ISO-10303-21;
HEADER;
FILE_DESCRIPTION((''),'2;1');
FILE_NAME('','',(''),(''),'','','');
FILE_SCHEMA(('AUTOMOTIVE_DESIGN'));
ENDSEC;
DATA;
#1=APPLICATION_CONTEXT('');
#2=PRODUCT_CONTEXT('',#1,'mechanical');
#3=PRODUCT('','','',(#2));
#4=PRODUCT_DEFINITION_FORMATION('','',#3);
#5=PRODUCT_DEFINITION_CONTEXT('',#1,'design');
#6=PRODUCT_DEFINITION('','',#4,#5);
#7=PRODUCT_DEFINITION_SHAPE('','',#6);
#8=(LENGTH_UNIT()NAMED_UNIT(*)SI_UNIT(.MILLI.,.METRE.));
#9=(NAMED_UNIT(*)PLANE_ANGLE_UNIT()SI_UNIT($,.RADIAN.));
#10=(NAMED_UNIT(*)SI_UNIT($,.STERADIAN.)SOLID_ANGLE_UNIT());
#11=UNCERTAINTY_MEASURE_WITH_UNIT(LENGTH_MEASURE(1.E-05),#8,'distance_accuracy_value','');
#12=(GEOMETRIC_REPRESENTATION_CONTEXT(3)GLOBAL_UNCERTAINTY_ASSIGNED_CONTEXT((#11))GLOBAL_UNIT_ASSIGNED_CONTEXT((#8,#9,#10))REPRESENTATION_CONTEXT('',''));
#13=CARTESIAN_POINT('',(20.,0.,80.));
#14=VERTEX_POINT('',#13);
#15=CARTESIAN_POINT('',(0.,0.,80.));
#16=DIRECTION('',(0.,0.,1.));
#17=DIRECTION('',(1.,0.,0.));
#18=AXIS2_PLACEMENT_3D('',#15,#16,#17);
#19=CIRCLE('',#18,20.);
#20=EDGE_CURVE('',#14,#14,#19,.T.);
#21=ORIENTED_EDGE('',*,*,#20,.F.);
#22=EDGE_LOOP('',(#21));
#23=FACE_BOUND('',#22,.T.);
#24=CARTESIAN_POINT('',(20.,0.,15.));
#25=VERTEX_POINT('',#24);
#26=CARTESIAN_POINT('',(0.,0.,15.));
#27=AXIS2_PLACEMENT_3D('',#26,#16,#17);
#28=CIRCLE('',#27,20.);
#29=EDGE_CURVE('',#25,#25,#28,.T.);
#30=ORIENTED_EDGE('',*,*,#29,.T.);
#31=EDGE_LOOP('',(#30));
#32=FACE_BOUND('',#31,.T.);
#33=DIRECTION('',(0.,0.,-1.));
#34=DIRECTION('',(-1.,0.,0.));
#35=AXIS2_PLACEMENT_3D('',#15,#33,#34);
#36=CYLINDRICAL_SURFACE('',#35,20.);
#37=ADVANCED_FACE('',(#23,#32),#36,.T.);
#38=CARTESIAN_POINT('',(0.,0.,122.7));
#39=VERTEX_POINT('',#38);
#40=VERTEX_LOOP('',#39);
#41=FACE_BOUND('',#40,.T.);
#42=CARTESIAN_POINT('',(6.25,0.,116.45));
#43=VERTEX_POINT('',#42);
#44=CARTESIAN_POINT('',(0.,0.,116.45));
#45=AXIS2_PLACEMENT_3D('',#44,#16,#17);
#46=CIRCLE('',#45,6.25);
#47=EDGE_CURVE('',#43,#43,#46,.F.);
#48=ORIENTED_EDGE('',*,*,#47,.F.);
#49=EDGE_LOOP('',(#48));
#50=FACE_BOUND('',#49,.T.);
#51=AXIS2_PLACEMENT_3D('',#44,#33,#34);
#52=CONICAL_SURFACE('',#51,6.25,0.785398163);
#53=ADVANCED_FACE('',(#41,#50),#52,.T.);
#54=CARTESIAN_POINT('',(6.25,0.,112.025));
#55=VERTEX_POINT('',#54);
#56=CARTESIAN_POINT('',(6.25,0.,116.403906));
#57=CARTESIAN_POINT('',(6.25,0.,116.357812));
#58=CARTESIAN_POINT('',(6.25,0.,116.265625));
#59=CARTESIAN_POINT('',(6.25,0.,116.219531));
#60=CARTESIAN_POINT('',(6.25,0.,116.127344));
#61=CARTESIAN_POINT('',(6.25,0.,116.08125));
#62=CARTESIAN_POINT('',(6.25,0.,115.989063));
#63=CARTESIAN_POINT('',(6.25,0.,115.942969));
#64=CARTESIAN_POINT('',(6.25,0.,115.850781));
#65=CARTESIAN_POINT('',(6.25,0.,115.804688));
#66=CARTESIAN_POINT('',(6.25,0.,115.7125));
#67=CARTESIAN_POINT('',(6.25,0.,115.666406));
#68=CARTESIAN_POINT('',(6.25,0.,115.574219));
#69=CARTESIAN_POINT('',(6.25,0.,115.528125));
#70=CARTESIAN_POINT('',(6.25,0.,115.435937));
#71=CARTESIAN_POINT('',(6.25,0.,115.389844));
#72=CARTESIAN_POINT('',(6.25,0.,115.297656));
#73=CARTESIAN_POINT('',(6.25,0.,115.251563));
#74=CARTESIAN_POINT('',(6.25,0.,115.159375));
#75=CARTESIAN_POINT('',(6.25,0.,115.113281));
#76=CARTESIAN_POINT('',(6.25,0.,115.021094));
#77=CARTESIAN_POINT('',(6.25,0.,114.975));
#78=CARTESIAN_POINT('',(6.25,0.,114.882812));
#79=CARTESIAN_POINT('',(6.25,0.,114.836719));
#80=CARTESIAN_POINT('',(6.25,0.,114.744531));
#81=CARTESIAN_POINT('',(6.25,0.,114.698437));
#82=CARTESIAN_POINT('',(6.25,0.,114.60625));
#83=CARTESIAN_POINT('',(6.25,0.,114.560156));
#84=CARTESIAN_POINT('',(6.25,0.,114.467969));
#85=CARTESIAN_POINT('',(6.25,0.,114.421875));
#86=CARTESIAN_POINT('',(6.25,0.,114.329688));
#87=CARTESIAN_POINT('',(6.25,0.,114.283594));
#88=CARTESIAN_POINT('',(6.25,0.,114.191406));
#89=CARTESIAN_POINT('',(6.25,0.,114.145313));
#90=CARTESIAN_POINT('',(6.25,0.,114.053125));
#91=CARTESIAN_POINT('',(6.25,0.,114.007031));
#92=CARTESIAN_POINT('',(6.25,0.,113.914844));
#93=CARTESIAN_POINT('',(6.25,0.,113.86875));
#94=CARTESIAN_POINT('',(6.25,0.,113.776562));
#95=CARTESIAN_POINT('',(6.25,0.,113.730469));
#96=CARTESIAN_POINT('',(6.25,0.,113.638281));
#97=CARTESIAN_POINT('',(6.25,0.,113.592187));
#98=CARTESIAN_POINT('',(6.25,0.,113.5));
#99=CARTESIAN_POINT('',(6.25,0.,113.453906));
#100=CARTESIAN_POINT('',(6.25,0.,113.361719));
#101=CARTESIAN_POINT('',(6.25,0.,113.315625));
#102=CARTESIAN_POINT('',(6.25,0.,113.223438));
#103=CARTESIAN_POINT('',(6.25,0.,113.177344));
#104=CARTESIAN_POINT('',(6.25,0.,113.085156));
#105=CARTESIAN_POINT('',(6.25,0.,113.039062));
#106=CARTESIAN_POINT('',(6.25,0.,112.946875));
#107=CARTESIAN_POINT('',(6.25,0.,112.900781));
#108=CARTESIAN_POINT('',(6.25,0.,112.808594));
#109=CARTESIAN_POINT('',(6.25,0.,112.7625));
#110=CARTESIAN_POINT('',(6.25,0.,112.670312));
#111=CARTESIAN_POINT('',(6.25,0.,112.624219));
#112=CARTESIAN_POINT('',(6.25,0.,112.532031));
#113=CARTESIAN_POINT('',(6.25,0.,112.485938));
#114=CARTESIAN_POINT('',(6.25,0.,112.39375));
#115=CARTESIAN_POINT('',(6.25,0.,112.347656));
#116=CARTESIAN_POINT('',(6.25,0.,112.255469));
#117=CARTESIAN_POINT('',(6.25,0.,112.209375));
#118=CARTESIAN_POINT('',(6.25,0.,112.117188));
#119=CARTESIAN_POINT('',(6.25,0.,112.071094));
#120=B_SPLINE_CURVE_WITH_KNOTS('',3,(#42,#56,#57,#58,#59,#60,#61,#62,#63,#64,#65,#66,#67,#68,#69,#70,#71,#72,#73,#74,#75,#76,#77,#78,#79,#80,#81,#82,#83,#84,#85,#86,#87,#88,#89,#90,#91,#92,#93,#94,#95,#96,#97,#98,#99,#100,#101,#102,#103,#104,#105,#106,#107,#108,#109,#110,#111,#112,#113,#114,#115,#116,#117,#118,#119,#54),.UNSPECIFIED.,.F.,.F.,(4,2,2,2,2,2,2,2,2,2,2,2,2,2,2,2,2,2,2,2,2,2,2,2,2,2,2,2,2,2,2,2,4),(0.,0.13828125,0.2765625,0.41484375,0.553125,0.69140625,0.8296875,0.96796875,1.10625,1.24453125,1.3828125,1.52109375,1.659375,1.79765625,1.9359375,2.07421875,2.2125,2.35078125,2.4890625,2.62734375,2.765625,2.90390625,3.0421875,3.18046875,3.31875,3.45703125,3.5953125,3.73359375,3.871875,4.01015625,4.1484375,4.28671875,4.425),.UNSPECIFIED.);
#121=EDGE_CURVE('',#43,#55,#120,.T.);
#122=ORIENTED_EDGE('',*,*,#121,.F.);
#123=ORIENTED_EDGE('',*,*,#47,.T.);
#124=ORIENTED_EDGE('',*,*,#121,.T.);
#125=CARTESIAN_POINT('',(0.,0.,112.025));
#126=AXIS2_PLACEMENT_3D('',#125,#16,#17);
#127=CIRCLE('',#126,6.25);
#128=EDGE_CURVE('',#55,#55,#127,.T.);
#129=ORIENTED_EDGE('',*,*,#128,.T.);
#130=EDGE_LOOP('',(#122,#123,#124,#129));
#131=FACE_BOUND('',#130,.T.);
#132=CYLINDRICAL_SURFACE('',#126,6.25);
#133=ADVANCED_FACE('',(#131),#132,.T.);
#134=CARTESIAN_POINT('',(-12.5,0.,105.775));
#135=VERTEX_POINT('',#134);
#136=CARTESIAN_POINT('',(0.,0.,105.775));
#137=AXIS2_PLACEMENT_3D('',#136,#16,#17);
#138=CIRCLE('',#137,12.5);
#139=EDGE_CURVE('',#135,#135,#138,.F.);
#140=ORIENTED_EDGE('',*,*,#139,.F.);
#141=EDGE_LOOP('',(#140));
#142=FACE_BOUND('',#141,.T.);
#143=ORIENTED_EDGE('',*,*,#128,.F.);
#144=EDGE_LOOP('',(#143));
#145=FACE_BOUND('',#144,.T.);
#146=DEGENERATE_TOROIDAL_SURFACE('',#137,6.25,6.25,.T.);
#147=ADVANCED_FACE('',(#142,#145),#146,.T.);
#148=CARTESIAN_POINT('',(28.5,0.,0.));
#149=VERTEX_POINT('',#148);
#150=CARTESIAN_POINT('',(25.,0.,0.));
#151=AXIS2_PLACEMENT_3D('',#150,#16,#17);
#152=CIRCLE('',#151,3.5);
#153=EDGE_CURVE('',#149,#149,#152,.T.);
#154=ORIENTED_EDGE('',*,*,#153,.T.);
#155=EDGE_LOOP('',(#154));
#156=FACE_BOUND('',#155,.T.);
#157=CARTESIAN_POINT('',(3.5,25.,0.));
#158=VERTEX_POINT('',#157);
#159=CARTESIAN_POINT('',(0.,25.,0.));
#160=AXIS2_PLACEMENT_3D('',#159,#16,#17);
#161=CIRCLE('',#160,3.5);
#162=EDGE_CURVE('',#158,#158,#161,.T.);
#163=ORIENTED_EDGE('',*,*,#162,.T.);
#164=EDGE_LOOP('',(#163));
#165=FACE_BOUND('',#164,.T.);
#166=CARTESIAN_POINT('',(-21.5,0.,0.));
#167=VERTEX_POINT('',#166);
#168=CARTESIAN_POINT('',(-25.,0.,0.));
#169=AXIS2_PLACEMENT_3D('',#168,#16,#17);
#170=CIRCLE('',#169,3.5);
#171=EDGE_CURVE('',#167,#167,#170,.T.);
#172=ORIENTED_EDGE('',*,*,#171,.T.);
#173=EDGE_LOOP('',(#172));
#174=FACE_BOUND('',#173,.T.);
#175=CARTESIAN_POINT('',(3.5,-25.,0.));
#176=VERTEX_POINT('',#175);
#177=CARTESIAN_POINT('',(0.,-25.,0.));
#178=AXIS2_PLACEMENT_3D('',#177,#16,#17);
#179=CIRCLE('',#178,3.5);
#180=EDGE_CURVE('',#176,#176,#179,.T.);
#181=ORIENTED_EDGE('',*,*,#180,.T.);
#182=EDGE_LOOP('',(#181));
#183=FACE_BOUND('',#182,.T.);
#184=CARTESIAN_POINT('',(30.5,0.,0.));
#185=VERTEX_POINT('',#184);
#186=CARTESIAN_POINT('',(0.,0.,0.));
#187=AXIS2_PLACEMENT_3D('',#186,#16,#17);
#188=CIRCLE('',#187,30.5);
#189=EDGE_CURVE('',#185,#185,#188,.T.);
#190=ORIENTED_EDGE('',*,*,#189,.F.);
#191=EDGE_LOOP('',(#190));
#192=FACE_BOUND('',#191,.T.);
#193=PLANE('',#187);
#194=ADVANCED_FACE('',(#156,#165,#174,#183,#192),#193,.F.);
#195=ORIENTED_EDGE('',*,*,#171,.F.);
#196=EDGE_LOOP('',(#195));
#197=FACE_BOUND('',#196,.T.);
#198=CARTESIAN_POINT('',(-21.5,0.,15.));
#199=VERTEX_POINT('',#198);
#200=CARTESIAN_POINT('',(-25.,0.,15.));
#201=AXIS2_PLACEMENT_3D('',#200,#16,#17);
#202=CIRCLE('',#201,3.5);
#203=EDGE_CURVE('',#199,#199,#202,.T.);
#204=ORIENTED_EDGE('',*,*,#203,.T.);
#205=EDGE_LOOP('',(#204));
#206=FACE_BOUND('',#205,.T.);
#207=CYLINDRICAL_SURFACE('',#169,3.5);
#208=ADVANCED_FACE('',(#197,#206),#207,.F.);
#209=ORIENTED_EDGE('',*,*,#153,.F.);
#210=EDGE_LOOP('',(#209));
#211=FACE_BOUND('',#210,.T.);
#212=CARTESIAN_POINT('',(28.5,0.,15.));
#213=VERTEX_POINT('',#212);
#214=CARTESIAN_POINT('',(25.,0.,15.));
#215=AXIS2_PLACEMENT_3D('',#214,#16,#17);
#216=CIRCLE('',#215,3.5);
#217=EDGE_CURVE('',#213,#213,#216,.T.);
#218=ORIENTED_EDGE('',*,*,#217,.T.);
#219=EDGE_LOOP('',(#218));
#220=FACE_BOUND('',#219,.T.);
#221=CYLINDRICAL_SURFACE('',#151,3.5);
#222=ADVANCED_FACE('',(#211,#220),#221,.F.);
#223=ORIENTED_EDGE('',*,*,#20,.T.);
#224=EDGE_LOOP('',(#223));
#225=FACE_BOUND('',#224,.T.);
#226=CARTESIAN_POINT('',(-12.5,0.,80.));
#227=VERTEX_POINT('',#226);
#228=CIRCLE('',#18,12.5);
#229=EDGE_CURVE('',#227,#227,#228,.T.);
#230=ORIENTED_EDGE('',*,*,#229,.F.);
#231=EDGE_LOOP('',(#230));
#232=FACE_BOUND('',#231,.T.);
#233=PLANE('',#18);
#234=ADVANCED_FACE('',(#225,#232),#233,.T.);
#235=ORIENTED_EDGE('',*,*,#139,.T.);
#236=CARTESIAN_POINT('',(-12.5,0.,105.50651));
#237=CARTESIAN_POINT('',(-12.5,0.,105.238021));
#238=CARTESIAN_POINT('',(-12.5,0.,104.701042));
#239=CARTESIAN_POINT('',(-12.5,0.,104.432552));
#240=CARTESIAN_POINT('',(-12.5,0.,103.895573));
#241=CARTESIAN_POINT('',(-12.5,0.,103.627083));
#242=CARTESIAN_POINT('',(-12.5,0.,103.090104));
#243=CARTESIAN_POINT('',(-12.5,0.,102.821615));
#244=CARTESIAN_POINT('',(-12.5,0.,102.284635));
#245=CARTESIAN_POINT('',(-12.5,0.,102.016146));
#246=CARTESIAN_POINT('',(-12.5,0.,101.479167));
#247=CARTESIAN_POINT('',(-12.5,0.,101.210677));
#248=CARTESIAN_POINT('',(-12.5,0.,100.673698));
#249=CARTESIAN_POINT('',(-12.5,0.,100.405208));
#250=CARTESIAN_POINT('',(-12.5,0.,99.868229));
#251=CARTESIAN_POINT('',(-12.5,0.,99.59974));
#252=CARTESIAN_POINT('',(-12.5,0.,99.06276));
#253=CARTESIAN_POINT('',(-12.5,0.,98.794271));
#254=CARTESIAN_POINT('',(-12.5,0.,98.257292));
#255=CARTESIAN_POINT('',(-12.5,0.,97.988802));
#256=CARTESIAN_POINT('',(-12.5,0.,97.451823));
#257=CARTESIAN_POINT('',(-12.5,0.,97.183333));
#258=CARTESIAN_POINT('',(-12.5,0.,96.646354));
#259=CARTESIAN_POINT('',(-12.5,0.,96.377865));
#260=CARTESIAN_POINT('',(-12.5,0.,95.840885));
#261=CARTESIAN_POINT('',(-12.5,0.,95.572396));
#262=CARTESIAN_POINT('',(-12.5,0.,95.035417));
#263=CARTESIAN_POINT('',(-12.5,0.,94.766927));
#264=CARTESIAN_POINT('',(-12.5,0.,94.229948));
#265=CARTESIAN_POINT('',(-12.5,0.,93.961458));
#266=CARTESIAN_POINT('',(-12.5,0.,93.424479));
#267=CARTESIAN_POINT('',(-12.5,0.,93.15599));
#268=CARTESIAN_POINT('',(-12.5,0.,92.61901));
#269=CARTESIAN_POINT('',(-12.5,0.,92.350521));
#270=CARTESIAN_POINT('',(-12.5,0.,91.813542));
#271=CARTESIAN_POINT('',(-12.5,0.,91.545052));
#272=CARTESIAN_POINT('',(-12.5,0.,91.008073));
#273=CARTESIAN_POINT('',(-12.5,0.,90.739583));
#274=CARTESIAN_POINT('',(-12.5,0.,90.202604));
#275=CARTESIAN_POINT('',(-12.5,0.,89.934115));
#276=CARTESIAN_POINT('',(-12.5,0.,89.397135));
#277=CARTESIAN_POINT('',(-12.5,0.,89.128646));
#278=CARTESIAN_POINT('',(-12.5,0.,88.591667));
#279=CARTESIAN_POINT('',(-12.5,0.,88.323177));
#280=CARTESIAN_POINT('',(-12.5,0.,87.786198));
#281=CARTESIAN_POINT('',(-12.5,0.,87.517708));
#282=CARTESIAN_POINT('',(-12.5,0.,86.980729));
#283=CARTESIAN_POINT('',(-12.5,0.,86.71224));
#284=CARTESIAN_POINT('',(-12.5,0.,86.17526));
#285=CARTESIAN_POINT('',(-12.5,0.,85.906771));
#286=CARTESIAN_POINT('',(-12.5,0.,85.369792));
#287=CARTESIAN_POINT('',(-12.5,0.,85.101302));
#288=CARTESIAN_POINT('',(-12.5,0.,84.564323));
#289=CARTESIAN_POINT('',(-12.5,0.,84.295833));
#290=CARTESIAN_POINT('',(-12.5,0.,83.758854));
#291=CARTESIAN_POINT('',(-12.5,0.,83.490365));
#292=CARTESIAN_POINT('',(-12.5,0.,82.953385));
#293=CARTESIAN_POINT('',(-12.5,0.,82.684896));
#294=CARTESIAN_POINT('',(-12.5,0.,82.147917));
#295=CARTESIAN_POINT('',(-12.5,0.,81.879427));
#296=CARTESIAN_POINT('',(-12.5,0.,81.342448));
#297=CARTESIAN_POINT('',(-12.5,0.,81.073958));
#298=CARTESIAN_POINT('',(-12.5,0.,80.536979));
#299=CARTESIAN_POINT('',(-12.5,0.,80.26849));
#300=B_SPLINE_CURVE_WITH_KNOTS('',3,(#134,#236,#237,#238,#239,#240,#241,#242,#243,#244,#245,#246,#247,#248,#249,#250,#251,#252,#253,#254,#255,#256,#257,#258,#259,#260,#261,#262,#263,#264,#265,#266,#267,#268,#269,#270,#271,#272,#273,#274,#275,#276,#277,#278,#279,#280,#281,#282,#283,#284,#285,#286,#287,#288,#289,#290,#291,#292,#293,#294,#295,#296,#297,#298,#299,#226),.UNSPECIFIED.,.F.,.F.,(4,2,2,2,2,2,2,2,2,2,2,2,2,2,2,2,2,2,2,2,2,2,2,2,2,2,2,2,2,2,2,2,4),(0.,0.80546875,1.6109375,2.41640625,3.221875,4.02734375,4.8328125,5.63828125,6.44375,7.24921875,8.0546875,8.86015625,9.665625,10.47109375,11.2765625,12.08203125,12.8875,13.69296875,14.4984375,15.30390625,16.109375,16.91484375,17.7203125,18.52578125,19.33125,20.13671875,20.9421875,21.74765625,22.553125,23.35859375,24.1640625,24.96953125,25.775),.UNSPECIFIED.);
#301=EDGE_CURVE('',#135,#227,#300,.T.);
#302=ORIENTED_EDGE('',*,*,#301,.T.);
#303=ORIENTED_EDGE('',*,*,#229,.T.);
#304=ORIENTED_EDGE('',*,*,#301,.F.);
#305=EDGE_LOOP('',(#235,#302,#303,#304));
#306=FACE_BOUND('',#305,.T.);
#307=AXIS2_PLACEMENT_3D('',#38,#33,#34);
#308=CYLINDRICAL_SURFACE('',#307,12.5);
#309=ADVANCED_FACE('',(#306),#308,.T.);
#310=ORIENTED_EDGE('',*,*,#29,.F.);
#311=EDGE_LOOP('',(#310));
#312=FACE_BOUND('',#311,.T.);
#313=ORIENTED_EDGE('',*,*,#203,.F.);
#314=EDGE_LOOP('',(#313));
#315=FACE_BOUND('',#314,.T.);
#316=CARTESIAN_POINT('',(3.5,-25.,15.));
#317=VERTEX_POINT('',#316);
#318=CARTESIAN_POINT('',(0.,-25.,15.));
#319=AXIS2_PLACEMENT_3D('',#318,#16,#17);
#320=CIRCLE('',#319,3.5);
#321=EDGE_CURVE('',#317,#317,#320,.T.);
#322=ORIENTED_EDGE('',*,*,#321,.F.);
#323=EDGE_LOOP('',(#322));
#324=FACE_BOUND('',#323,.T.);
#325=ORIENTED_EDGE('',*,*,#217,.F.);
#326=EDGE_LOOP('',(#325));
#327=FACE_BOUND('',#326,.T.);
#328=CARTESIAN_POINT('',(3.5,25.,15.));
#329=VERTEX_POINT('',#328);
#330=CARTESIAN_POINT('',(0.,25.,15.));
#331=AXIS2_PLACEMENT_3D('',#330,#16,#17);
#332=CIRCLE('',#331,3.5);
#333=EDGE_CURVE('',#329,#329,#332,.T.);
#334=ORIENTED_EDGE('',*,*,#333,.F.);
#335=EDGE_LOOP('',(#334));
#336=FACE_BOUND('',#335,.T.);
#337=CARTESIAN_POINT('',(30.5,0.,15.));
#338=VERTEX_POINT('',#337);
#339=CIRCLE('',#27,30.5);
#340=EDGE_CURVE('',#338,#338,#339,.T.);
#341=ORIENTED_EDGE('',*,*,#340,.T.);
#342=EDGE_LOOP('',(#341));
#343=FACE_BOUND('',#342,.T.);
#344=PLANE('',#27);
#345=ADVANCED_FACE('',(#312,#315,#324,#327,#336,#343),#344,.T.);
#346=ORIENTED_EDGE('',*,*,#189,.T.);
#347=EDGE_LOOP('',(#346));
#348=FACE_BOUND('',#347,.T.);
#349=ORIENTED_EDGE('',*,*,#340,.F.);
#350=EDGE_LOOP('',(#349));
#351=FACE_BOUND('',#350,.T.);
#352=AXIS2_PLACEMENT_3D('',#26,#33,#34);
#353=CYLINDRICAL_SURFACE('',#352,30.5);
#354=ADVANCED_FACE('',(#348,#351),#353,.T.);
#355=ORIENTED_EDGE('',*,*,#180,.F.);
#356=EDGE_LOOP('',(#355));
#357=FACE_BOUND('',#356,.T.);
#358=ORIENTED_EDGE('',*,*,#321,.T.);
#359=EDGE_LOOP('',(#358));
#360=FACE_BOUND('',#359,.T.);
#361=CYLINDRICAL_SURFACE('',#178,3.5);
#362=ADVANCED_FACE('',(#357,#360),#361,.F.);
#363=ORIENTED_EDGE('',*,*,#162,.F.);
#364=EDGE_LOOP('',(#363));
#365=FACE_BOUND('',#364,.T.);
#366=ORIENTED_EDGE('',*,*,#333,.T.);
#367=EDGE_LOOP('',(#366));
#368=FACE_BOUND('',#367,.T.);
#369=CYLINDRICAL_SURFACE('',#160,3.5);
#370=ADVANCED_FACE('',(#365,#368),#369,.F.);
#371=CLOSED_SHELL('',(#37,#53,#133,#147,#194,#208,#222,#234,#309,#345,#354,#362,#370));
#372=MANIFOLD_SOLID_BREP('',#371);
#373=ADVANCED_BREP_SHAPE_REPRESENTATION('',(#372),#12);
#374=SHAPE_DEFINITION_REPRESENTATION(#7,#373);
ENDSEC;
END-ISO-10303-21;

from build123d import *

# Parameters (mm, degrees)
SKETCH1_R           = 30.5
BOSS_EXTRUDE1_DEPTH = 15
SKETCH2_R           = 3.5
CUT_EXTRUDE1_DEPTH  = 15
SKETCH3_R           = 20
BOSS_EXTRUDE2_DEPTH = 65
SKETCH4_R           = 12.5
BOSS_EXTRUDE3_DEPTH = 42.7
CUT_EXTRUDE2_START  = -10.675
SKETCH5_R           = 12.5
SKETCH5_R_2         = 6.25
CUT_EXTRUDE2_DEPTH  = 10.675
FILLET1_R           = 6.25
CHAMFER1_SIZE       = 6.25


with BuildPart() as part:
    # Sketch1 → Boss-Extrude1 (new body)
    with BuildSketch(Plane.XY):
        Circle(SKETCH1_R)
    extrude(amount=BOSS_EXTRUDE1_DEPTH)

    # Sketch2 → Cut-Extrude1 (cut)
    with BuildSketch(Plane.XY.offset(15)):
        with Locations((0, 25)):
            Circle(SKETCH2_R)
        with Locations((25, 0)):
            Circle(SKETCH2_R)
        with Locations((0, -25)):
            Circle(SKETCH2_R)
        with Locations((-25, 0)):
            Circle(SKETCH2_R)
    extrude(amount=-CUT_EXTRUDE1_DEPTH, mode=Mode.SUBTRACT)

    # Sketch3 → Boss-Extrude2 (add)
    with BuildSketch(Plane.XY.offset(15)):
        Circle(SKETCH3_R)
    extrude(amount=BOSS_EXTRUDE2_DEPTH)

    # Sketch4 → Boss-Extrude3 (add)
    with BuildSketch(Plane.XY.offset(80)):
        with Locations(Location((0, 0, 0), (0, 0, 180))):
            Circle(SKETCH4_R)
    extrude(amount=BOSS_EXTRUDE3_DEPTH)

    # Sketch5 → Cut-Extrude2 (cut)
    with BuildSketch(Plane.XY.offset(122.7).offset(CUT_EXTRUDE2_START)):
        with Locations(Location((0, 0, 0), (0, 0, 180))):
            Circle(SKETCH5_R)
        Circle(SKETCH5_R_2, mode=Mode.SUBTRACT)
    extrude(amount=CUT_EXTRUDE2_DEPTH, mode=Mode.SUBTRACT)

    # Fillet1
    fillet1_edges = [part.edges().sort_by_distance(p)[0] for p in [
        (12.5, 0, 112.025),
    ]]
    fillet(fillet1_edges, radius=FILLET1_R - 0.0001)  # a hair under: the kernel refuses the full size

    # Chamfer1
    chamfer1_edges = [part.edges().sort_by_distance(p)[0] for p in [
        (-6.25, 0, 122.7),
    ]]
    chamfer(chamfer1_edges, length=CHAMFER1_SIZE)


solid = part.part
